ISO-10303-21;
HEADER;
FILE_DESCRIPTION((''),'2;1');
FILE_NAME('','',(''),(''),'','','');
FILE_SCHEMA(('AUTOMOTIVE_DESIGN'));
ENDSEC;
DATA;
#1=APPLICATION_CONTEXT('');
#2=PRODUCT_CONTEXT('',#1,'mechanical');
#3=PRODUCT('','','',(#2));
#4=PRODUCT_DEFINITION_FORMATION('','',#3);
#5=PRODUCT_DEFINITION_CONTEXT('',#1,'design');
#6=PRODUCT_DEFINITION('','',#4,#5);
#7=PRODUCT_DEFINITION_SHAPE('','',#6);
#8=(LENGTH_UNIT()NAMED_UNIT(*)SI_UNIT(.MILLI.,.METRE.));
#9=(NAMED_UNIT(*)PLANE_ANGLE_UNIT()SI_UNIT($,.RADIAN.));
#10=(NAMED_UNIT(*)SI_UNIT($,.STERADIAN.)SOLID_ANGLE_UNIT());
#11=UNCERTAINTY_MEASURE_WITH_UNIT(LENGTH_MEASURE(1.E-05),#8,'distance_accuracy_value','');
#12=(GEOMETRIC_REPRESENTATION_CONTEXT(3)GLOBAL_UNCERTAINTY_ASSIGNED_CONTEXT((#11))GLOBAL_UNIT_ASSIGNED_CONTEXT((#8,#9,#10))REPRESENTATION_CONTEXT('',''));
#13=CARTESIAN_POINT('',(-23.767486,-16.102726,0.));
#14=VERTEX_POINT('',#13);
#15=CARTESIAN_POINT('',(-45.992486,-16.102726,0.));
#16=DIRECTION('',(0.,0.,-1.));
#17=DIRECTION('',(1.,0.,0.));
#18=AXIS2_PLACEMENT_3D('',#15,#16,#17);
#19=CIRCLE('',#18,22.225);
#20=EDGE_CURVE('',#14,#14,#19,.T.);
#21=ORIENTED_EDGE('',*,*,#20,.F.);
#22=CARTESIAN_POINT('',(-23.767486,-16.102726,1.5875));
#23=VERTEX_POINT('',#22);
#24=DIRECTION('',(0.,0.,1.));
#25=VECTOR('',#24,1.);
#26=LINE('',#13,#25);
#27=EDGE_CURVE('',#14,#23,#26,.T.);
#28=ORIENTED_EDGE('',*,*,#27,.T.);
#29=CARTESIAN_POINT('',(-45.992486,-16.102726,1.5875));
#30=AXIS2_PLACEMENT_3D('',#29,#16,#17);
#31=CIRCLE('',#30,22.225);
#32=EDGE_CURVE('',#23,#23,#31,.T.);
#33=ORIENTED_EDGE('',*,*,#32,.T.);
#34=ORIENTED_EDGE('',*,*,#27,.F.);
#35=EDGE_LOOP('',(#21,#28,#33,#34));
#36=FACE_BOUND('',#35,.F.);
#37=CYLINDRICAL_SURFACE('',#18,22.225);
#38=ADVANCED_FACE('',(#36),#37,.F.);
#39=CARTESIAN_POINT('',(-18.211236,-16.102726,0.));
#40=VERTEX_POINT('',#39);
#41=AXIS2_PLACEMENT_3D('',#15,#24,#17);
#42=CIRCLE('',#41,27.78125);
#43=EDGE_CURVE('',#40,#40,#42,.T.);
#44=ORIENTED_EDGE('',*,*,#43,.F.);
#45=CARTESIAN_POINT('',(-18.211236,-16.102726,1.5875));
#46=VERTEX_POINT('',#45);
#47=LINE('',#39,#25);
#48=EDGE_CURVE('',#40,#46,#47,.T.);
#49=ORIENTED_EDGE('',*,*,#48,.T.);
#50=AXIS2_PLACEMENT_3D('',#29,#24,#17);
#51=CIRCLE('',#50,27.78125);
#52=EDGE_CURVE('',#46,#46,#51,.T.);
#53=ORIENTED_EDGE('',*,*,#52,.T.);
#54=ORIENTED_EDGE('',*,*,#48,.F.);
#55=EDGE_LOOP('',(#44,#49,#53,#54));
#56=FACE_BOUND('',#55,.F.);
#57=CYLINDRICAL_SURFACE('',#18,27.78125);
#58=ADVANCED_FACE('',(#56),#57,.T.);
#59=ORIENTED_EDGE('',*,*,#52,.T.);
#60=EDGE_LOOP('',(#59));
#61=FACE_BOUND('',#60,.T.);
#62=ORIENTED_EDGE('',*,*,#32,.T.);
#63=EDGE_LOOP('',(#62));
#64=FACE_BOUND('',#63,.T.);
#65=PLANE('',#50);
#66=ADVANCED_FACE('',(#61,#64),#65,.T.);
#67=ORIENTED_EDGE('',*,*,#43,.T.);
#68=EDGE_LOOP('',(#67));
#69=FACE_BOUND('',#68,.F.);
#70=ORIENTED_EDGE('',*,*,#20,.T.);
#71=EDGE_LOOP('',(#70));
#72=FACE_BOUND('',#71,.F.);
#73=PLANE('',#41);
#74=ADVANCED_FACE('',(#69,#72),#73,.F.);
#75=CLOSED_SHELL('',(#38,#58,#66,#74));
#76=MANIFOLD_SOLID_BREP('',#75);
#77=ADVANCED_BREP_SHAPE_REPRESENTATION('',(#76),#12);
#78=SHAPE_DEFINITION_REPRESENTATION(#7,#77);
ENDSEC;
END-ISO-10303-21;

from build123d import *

# Parameters (mm, degrees)
F0_R     = 27.78125
F1_DEPTH = 1.5875
F2_R     = 22.225
F3_DEPTH = 25.4


# Not quite as in the source:
# - a length typed as a fraction of an inch, garbled in the dataset ("3 / 203.2 mm" for 3/8 in), is restored


with BuildPart() as f1:
    # F0 (on Top) → F1 (new body)
    with BuildSketch(Plane.XY):
        with Locations((-45.9924861789, -16.1027256399)):
            Circle(F0_R)
    extrude(amount=F1_DEPTH)

    # F2 (on face) → F3 (cut)
    with BuildSketch(Plane(origin=(0, 0, 0), x_dir=(1, 0, 0), z_dir=(0, 0, -1))):
        with Locations((-45.9924861789, 16.1027256399)):
            Circle(F2_R)
    extrude(amount=-F3_DEPTH, mode=Mode.SUBTRACT)


solid = f1.part
